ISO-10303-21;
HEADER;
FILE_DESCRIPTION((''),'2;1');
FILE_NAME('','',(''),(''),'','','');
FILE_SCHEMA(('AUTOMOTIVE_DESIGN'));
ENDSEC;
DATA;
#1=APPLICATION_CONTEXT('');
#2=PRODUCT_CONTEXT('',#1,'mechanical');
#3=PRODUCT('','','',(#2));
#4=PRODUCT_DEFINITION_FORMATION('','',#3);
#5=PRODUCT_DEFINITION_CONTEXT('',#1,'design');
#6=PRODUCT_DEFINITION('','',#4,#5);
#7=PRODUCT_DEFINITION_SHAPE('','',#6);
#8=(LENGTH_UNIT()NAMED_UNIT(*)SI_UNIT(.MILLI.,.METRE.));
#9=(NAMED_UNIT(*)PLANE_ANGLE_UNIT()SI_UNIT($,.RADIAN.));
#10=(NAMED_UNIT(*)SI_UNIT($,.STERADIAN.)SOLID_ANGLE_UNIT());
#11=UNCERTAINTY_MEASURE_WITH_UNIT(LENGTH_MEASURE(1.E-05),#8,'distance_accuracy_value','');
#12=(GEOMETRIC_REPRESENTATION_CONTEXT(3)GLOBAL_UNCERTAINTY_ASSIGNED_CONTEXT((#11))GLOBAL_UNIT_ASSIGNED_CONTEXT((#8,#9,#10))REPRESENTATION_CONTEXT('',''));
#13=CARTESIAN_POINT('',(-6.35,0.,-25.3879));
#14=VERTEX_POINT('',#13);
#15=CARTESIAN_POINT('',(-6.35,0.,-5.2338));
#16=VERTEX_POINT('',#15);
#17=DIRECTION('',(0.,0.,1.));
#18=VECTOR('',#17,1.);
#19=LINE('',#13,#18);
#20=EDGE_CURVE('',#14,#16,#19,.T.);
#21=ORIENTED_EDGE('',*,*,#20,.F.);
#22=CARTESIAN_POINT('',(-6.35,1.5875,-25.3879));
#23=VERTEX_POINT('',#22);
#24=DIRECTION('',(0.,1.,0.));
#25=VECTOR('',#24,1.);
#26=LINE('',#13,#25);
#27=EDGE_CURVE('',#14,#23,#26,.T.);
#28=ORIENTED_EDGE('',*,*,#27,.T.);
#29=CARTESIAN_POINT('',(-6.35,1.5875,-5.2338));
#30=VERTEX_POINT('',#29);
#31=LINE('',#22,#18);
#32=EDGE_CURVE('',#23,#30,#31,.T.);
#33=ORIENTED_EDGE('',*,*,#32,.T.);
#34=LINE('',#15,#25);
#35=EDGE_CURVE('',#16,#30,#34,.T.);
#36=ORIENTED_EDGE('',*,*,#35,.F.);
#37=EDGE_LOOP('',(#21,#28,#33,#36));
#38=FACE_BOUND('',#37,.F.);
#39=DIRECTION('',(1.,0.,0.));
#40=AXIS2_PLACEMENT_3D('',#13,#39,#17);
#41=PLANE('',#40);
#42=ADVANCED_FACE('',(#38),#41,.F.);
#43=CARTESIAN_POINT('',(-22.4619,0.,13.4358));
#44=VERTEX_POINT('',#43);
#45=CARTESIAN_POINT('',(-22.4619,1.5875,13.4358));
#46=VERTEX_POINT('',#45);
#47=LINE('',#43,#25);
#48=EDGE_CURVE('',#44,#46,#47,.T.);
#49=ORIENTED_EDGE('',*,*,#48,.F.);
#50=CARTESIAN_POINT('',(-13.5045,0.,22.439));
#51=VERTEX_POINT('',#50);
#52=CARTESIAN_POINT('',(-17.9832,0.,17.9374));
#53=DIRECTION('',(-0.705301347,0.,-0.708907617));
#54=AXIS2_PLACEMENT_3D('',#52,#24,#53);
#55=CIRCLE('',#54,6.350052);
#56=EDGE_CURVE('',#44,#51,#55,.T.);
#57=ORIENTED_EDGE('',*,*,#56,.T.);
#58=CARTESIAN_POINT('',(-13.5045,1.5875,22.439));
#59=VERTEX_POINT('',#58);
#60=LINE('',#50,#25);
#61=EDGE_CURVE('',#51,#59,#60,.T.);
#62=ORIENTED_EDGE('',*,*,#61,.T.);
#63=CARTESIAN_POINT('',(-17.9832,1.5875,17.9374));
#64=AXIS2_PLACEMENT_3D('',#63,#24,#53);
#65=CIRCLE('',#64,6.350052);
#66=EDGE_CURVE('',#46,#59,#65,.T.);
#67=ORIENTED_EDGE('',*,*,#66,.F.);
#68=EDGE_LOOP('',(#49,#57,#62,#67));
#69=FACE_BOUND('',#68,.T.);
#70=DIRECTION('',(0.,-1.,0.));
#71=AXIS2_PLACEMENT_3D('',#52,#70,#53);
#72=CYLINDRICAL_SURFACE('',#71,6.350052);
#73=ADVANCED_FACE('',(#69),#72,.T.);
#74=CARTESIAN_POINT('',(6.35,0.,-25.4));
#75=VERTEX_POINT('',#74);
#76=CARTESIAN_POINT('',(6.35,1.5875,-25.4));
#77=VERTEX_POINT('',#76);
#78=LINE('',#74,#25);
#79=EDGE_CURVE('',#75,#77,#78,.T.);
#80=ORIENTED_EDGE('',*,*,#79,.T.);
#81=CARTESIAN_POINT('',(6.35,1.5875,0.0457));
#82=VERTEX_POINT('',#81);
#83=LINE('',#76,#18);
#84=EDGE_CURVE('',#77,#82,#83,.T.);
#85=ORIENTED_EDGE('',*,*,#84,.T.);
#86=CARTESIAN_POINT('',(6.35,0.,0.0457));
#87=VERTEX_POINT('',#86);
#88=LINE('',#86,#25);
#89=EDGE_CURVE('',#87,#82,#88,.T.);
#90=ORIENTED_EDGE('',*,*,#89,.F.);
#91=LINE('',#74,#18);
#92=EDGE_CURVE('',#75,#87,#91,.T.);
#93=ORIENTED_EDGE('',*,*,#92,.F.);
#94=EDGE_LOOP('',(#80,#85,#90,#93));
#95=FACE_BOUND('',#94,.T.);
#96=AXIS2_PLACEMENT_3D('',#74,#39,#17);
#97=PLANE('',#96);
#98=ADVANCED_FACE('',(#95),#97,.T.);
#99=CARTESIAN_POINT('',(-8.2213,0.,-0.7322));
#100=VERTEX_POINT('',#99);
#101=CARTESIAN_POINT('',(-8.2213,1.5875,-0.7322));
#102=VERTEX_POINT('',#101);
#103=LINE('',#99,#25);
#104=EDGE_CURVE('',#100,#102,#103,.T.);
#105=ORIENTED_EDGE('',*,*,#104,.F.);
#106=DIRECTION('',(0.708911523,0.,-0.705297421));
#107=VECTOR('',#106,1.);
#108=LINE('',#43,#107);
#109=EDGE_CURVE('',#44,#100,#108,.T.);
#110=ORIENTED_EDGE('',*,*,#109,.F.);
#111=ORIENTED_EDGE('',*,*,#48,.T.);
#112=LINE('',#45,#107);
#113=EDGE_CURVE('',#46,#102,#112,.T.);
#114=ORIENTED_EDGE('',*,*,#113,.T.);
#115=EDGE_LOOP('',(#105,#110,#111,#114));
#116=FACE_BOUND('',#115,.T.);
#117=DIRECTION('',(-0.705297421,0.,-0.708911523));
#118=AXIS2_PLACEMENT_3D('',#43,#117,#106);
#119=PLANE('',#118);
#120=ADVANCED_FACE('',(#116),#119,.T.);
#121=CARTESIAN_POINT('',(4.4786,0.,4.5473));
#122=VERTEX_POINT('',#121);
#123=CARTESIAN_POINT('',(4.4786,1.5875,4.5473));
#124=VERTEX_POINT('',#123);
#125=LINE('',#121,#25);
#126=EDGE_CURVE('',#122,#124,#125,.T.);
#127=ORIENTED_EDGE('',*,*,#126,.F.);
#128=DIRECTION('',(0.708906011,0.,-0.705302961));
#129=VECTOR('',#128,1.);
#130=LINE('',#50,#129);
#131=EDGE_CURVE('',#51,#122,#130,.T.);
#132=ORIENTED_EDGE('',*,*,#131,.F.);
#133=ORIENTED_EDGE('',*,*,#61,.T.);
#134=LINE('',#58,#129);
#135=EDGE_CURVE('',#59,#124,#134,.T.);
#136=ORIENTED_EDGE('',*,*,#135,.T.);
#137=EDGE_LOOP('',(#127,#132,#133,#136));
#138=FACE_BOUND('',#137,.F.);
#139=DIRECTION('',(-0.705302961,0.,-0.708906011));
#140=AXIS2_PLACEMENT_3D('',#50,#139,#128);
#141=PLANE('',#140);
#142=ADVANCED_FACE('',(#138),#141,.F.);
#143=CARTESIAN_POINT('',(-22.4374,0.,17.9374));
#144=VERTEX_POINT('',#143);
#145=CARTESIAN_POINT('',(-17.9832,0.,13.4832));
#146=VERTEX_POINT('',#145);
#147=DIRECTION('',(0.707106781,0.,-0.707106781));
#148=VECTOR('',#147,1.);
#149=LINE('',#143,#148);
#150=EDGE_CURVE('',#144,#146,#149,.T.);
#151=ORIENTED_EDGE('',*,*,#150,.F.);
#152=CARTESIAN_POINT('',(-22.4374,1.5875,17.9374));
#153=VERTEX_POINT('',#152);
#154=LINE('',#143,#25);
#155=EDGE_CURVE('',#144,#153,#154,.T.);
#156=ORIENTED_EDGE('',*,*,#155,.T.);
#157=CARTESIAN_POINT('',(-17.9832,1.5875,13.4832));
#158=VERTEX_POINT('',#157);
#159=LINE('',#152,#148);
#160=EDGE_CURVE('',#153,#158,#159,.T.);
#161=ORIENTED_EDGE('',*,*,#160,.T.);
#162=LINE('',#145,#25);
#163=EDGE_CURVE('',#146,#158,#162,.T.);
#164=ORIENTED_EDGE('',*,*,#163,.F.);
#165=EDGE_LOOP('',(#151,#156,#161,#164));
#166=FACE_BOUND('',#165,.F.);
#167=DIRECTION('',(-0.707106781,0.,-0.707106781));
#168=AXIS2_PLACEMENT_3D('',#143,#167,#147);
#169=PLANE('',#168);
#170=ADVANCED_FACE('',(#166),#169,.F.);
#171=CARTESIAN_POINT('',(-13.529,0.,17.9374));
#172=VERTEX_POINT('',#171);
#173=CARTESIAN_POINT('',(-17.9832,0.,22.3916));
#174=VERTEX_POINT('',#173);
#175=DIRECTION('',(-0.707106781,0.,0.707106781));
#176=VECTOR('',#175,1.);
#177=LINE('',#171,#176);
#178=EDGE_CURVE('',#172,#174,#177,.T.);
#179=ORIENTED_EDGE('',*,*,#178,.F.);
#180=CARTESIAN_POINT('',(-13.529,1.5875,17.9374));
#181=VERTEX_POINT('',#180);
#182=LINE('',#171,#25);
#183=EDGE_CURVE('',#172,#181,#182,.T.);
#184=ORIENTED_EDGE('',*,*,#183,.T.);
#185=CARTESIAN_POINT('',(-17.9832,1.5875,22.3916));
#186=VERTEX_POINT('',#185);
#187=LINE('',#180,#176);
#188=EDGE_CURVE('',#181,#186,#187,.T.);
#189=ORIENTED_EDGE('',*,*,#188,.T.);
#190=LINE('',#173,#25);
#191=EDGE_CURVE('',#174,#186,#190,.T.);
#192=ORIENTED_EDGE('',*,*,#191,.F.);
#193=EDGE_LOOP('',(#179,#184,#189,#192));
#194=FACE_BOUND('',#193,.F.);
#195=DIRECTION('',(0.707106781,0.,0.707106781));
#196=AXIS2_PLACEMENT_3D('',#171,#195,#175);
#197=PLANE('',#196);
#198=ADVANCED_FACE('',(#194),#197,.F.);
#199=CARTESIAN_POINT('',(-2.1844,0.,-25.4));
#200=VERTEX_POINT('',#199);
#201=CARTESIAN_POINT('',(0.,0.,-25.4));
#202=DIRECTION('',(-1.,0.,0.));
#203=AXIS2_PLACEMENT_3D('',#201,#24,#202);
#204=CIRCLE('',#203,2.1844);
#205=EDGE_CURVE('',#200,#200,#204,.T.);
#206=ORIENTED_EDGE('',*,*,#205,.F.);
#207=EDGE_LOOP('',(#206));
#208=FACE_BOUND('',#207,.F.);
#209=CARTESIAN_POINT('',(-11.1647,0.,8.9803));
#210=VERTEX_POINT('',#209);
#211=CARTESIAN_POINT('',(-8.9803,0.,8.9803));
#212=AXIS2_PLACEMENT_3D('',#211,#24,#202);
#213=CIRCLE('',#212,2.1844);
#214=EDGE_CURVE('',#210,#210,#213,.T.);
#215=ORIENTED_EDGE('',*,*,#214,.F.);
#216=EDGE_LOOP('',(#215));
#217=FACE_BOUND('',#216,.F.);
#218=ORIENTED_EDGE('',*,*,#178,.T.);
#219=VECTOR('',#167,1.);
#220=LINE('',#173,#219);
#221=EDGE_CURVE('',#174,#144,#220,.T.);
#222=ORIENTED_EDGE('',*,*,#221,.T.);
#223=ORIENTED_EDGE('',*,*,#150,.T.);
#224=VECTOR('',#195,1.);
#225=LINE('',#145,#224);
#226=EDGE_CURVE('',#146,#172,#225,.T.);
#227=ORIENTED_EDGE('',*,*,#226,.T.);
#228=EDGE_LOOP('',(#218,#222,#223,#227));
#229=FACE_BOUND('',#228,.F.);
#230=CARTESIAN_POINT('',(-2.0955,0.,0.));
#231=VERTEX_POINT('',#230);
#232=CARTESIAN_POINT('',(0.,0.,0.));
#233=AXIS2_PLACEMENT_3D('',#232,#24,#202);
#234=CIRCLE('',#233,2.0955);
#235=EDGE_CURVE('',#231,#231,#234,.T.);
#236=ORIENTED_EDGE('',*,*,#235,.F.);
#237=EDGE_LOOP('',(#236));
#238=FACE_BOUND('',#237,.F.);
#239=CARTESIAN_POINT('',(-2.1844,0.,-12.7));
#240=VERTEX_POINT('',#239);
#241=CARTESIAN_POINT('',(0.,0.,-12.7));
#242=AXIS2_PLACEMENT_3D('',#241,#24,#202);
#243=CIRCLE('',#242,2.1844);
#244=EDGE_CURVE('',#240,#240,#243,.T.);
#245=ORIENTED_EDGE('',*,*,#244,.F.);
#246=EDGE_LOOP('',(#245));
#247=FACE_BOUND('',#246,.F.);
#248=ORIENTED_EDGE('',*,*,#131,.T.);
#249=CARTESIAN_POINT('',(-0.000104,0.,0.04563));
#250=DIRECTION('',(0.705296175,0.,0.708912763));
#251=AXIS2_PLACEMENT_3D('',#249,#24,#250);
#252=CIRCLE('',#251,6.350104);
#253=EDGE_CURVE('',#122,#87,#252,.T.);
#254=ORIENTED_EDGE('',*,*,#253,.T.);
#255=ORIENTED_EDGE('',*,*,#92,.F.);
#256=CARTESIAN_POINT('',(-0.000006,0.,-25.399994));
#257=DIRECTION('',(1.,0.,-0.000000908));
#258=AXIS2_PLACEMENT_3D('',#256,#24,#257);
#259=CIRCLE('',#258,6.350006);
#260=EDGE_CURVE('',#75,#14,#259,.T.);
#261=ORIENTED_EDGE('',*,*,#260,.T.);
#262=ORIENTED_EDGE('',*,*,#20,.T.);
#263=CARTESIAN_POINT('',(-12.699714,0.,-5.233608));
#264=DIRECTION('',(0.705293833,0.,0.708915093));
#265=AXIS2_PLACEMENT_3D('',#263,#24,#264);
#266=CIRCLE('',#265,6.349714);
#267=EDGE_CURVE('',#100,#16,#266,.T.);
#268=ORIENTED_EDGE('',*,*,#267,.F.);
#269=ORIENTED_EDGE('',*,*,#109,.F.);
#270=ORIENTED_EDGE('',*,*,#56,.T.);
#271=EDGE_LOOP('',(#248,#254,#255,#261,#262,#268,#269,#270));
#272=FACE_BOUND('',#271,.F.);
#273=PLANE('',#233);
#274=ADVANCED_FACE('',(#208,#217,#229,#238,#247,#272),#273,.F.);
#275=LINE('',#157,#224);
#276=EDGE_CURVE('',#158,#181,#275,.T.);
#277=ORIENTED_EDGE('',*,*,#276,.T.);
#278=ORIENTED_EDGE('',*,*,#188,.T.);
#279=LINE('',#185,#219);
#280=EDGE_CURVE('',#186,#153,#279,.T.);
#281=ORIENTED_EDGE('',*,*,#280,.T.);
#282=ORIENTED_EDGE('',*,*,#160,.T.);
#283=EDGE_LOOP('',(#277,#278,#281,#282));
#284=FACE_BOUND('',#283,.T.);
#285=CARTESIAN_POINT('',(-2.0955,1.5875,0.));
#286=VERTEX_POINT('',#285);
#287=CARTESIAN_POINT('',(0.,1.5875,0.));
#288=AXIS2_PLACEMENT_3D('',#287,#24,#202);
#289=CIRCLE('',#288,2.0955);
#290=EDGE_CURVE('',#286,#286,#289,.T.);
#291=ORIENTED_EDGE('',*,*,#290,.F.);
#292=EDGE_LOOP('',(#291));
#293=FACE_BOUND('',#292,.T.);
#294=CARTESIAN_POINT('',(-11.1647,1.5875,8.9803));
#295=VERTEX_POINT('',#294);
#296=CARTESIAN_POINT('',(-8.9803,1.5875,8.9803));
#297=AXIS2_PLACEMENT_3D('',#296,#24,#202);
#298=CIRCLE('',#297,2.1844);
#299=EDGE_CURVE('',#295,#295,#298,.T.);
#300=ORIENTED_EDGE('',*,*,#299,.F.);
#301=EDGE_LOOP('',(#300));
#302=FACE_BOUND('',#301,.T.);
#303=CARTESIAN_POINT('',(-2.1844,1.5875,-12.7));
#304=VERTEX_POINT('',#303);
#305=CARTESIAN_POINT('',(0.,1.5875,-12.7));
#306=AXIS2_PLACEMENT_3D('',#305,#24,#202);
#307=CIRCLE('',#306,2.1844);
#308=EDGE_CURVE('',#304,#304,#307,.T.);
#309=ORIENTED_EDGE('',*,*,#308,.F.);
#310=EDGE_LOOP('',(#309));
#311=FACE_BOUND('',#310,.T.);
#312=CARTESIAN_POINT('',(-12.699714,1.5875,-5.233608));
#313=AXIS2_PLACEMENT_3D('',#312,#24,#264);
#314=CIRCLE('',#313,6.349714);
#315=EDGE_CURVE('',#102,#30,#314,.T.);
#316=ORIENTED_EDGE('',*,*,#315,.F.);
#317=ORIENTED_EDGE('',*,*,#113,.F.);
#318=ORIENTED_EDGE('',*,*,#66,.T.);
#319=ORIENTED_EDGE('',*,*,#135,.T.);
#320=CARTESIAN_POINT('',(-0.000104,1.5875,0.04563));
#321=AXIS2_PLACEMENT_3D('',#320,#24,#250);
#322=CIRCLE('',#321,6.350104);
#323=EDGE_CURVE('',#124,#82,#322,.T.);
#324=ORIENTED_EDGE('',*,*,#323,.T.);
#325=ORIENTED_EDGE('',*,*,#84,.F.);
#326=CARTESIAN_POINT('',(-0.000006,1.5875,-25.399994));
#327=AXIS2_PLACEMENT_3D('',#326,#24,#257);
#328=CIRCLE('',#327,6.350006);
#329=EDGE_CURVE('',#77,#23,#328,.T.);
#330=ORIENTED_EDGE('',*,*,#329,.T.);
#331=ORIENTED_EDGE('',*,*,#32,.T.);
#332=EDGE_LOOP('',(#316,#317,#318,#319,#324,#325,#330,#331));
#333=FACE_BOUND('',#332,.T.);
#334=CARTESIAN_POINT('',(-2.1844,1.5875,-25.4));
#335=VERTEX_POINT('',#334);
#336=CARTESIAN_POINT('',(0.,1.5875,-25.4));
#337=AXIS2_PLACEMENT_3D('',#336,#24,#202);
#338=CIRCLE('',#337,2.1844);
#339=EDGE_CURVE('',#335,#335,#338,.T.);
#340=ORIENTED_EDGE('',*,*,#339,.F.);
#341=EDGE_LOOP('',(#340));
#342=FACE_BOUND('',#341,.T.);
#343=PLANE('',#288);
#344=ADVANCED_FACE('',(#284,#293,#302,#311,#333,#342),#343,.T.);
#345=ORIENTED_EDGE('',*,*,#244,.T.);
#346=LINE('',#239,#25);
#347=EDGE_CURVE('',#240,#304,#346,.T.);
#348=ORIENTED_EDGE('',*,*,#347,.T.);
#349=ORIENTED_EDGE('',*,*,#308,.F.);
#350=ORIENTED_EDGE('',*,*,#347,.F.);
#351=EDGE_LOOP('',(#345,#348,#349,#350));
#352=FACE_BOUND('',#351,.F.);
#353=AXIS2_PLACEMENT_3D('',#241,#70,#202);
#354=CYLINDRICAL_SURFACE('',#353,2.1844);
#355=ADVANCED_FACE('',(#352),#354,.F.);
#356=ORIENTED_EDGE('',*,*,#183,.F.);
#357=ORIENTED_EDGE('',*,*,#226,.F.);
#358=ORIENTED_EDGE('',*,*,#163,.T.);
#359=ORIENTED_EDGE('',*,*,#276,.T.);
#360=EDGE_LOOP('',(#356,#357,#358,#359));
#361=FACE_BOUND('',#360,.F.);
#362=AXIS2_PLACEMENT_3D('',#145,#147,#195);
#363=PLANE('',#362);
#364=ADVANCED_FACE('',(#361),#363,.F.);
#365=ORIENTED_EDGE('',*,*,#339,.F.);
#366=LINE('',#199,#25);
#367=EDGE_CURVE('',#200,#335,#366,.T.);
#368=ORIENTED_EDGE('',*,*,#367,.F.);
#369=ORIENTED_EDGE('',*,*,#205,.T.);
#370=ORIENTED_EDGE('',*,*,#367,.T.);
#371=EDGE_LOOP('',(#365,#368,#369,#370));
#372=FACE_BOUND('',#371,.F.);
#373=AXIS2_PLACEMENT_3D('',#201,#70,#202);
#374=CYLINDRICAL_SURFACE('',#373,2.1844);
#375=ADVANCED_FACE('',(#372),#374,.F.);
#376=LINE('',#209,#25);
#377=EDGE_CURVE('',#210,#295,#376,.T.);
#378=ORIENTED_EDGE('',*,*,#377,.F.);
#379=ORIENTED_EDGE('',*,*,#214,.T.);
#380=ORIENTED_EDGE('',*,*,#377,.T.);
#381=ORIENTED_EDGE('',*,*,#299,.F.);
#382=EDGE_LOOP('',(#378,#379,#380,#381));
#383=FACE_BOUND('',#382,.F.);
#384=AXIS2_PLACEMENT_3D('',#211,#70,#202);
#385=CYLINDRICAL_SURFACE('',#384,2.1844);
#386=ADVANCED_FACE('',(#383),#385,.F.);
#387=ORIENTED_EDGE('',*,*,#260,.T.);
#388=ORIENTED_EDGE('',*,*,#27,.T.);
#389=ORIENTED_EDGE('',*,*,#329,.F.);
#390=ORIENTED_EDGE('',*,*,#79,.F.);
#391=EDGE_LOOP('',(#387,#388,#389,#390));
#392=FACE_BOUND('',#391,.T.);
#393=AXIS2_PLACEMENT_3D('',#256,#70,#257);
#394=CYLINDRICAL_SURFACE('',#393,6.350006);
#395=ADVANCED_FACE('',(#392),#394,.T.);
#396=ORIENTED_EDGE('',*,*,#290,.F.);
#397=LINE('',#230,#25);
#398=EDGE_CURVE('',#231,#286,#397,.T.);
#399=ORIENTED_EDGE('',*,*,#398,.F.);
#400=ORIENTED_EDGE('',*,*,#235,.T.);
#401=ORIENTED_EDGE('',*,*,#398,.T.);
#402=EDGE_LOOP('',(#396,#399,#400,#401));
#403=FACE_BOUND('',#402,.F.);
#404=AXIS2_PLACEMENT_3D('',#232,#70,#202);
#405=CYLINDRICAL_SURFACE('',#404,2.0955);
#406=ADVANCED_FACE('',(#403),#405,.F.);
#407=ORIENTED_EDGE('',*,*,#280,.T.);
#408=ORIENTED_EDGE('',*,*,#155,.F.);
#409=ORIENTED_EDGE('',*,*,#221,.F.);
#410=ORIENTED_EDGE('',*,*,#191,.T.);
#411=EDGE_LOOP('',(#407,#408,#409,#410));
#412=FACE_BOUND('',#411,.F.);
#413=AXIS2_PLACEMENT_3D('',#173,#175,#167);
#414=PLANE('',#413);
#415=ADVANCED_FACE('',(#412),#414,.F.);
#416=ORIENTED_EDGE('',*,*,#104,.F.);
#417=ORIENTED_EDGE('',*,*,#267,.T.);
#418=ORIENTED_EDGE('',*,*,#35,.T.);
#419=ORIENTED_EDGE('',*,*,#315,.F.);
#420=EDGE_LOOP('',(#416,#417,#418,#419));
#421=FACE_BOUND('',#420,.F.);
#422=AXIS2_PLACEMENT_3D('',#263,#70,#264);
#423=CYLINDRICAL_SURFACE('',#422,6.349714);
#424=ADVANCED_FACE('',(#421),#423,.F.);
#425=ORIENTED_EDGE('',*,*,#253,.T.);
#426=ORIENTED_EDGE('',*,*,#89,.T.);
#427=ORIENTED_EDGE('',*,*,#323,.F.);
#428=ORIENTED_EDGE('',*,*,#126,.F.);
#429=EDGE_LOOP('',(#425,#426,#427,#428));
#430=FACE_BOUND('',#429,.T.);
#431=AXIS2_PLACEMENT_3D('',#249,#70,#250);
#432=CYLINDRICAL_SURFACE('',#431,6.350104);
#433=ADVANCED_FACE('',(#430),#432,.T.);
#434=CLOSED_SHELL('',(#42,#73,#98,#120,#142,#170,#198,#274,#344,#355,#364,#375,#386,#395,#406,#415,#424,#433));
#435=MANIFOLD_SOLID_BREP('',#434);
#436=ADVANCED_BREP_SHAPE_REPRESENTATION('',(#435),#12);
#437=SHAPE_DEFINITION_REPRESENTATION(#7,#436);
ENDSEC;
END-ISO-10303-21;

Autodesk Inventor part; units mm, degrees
ref_plane "YZ Plane" through (0, 0, 0) normal (1, 0, 0) x (0, 1, 0)
ref_plane "XZ Plane" through (0, 0, 0) normal (0, 1, 0) x (-1, 0, 0)
ref_plane "XY Plane" through (0, 0, 0) normal (0, 0, 1) x (1, 0, 0)
sketch "main" plane through (0, 0, 0) normal (0, 0, 1) x (1, 0, 0)
  arc A0 (11.6558, 28.6956) -> (2.6985, 37.6987) centre (7.1771, 33.1971) ccw
  circle A1 centre (-10.8061, -10.1403) radius 2.1844
  arc A2 (-17.1561, -10.1402) -> (-4.4561, -10.1282) centre (-10.8061, -10.1403) ccw
  line L0 (2.6985, 37.6987) -> (-15.2847, 19.807)
  circle A3 centre (-1.8258, 24.24) radius 2.1844
  line L1 (11.6558, 28.6956) -> (-2.5847, 14.5275)
  line L2 (-10.8061, 15.2597) -> (27.2939, 15.2597) construction
  circle A4 centre (-10.8061, 2.5597) radius 2.1844
  line L3 (-4.4561, -10.1282) -> (-4.4561, 10.026)
  arc A5 (-2.5847, 14.5275) -> (-4.4561, 10.026) centre (1.8939, 10.026) ccw
  line L4 (-17.1561, -10.1402) -> (-17.1561, 15.3055)
  circle A6 centre (-10.8061, 15.2597) radius 2.0955
  arc A7 (-15.2847, 19.807) -> (-17.1561, 15.3055) centre (-10.8061, 15.3055) ccw
  line L5 (7.1771, 37.6513) -> (11.6313, 33.1971)
  line L6 (11.6313, 33.1971) -> (7.1771, 28.7429)
  line L7 (7.1771, 28.7429) -> (2.7229, 33.1971)
  line L8 (2.7229, 33.1971) -> (7.1771, 37.6513)
  line L9 (7.1771, 37.6513) -> (7.1771, 28.7429) construction
  line L10 (11.6313, 33.1971) -> (2.7229, 33.1971) construction
  line L11 (7.1771, 37.6513) -> (13.4763, 37.6513) construction
  point P0 (0.9467, 22.1756)
  point P1 (5.5442, 34.8331)
  point P2 (8.7899, 34.8537)
  point P3 (5.5158, 31.5901)
  dimension "d0" = 12.7
  dimension "d5" = 12.7
  dimension "d6" = 6.35
  dimension "d9" = 6.2992
  dimension "d10" = 45
  dimension "d11" = 6.2992
sketch "Sketch1" plane through (0, 0, 0) normal (0, 1, 0) x (-1, 0, 0)
  arc A0 (22.4619, 13.4358) -> (13.5045, 22.439) centre (17.9832, 17.9374) ccw
  circle A1 centre (0, -25.4) radius 2.1844
  arc A2 (-6.35, -25.4) -> (6.35, -25.3879) centre (0, -25.4) ccw
  line L0 (13.5045, 22.439) -> (-4.4786, 4.5473)
  circle A3 centre (8.9803, 8.9803) radius 2.1844
  line L1 (22.4619, 13.4358) -> (8.2213, -0.7322)
  line L2 (0, 0) -> (38.1, 0) construction
  circle A4 centre (0, -12.7) radius 2.1844
  line L3 (6.35, -25.3879) -> (6.35, -5.2338)
  arc A5 (8.2213, -0.7322) -> (6.35, -5.2338) centre (12.7, -5.2338) ccw
  line L4 (-6.35, -25.4) -> (-6.35, 0.0457)
  circle A6 centre (0, 0) radius 2.0955
  arc A7 (-4.4786, 4.5473) -> (-6.35, 0.0457) centre (0, 0.0457) ccw
  line L5 (17.9832, 22.3916) -> (22.4374, 17.9374)
  line L6 (22.4374, 17.9374) -> (17.9832, 13.4832)
  line L7 (17.9832, 13.4832) -> (13.529, 17.9374)
  line L8 (13.529, 17.9374) -> (17.9832, 22.3916)
  line L9 (17.9832, 22.3916) -> (17.9832, 13.4832) construction
  line L10 (22.4374, 17.9374) -> (13.529, 17.9374) construction
  line L11 (17.9832, 22.3916) -> (24.2824, 22.3916) construction
extrude "Extrusion1" add sketch "Sketch1" along normal blind 1.5875
properties part number "gusset" material "Acetal Resin, White"
